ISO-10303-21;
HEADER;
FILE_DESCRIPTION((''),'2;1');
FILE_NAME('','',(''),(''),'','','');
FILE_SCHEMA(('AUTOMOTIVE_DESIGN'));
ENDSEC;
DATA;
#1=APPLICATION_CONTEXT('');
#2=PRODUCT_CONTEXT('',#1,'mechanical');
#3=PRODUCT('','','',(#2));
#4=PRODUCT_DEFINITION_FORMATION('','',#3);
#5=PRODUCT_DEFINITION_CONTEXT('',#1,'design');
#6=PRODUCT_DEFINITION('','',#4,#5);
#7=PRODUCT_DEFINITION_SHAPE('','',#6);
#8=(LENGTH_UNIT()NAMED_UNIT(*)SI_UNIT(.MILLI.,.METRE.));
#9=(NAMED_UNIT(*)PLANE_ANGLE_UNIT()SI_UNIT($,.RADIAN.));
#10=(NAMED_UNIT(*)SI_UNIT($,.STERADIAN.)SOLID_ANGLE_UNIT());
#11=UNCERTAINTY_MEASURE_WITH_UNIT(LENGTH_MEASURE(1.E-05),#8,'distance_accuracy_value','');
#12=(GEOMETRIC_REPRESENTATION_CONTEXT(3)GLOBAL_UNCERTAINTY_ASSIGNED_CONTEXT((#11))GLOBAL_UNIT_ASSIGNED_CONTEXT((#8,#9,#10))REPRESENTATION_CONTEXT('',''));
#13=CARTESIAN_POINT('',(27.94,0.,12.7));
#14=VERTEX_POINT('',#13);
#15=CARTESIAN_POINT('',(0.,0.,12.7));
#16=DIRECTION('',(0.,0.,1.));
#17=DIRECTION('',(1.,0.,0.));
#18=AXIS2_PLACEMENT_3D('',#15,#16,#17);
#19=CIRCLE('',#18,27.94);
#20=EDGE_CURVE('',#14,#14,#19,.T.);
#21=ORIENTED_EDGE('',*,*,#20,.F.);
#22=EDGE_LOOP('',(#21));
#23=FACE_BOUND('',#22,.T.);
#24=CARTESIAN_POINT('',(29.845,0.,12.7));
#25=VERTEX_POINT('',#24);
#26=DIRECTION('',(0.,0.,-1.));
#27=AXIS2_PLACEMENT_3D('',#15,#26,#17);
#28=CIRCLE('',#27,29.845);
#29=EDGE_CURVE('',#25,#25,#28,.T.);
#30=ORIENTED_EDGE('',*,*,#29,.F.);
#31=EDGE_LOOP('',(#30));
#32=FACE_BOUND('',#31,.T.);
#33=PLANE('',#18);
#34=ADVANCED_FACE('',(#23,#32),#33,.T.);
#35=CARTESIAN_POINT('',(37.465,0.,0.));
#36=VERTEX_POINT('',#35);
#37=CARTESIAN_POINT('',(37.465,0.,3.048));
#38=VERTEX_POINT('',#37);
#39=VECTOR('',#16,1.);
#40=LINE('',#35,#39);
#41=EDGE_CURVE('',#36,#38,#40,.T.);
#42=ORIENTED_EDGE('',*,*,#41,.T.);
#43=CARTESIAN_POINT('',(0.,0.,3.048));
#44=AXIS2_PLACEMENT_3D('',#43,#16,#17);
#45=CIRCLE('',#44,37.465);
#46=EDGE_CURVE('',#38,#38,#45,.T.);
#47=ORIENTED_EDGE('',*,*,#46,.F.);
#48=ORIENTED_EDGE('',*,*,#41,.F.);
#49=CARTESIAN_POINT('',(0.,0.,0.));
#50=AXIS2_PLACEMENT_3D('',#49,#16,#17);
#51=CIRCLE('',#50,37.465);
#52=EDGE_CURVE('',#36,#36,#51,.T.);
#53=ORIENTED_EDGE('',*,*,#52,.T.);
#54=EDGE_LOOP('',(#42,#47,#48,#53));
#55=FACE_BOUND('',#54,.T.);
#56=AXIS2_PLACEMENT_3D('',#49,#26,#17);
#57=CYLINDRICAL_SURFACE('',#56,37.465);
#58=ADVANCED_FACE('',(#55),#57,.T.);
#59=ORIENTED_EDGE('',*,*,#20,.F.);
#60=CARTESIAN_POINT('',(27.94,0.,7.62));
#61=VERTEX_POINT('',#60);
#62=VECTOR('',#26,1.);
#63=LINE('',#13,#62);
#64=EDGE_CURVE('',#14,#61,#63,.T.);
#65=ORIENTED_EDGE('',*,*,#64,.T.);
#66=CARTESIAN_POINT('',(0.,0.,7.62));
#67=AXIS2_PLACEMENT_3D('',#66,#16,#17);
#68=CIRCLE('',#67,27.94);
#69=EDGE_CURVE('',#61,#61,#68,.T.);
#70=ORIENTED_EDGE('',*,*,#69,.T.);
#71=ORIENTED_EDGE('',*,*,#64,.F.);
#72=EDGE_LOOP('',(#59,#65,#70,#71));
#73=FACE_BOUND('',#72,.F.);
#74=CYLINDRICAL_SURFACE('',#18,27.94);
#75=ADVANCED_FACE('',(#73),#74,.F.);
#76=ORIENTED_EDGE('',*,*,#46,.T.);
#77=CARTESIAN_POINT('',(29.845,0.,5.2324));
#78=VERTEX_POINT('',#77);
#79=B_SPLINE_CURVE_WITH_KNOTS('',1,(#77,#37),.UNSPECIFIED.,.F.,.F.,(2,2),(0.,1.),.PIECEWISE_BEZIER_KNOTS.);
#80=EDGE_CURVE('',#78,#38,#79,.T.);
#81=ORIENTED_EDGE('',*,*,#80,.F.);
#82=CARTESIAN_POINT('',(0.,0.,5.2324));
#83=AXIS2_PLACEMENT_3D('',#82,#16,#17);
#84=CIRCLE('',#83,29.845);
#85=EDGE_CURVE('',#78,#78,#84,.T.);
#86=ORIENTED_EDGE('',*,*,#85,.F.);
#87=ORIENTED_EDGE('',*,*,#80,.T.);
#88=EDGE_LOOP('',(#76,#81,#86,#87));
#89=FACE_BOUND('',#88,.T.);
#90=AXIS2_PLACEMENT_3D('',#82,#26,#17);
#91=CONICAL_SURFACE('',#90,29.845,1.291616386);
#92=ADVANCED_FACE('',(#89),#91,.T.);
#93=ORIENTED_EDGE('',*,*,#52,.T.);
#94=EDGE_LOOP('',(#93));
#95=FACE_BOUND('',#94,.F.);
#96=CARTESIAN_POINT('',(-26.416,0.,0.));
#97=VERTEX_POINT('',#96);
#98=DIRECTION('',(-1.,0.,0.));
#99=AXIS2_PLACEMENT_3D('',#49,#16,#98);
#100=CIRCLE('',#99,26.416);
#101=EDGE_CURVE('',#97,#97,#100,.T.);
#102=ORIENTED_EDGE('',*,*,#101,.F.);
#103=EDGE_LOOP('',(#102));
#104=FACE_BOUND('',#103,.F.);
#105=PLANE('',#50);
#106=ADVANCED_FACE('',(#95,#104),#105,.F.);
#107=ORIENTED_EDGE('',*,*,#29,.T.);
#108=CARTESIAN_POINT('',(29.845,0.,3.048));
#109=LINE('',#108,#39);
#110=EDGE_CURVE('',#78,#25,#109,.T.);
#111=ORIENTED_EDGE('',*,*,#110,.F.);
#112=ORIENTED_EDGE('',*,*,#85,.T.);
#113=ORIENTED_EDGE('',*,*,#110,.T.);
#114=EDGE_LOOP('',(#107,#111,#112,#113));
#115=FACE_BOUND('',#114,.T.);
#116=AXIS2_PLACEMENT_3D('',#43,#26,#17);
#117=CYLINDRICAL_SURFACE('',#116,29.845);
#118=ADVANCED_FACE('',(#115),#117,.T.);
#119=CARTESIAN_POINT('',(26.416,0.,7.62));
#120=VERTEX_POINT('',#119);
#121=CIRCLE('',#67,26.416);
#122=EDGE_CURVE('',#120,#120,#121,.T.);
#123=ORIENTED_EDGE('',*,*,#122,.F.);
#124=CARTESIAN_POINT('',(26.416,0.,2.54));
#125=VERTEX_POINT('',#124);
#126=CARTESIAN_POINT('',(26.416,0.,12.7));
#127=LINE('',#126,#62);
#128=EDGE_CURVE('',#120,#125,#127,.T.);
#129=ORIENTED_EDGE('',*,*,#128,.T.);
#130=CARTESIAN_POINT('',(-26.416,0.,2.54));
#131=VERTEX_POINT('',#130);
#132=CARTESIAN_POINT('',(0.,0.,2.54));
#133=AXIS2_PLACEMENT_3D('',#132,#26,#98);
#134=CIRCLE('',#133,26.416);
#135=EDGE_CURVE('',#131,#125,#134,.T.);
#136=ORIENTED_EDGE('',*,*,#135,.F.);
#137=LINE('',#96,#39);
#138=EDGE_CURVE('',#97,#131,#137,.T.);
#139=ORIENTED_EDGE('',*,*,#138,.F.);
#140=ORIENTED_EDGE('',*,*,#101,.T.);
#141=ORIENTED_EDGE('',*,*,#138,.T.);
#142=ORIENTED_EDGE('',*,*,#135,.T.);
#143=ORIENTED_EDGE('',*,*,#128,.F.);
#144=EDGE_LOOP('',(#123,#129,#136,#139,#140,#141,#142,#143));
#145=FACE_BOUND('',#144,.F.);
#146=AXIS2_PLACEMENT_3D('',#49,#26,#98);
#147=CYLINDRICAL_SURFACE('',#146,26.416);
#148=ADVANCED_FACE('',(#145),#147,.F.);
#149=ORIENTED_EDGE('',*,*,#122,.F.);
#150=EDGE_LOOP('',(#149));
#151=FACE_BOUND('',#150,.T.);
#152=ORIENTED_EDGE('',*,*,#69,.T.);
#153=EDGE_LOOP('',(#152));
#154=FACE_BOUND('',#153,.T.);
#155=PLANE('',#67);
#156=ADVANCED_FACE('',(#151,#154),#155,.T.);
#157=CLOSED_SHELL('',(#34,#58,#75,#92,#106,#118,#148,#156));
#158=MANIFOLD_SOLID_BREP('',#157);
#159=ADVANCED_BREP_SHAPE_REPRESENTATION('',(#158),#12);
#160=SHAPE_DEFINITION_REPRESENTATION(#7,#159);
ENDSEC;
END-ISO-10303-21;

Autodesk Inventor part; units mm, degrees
ref_plane "YZ Plane" through (0, 0, 0) normal (1, 0, 0) x (0, 1, 0)
ref_plane "XZ Plane" through (0, 0, 0) normal (0, 1, 0) x (-1, 0, 0)
sketch "Sketch1" plane through (0, 0, 0) normal (0, 0, 1) x (1, 0, 0)
  circle A0 centre (0, 0) radius 37.465
  dimension "d0" = 74.93
extrude "Extrusion1" add sketch "Sketch1" along normal blind 12.7
sketch "Sketch3" plane through (0, 0, 12.7) normal (0, 0, 1) x (1, 0, 0)
  circle A0 centre (0, 0) radius 26.289
  dimension "d6" = 52.578
extrude "Extrusion3" cut sketch "Sketch3" against normal blind 2.54
sketch "Sketch4" plane through (0, 0, 0) normal (0, 0, -1) x (-1, 0, 0)
  circle A0 centre (0, 0) radius 26.416
  dimension "d9" = 52.832
extrude "Extrusion4" cut sketch "Sketch4" against normal blind 2.54
ref_plane "Work Plane1" through (0, 0, 12.7) normal (0, 0, 1) x (1, 0, 0)
ref_plane "Work Plane3" through (0, 0, 5.2324) normal (0, 0, 1) x (1, 0, 0)
ref_plane "Work Plane5" through (0, 0, 3.048) normal (0, 0, 1) x (1, 0, 0)
sketch "Sketch9" plane through (0, 0, 5.2324) normal (0, 0, 1) x (1, 0, 0)
  circle A0 centre (0, 0) radius 29.845 projected
sketch "Sketch11" plane through (0, 0, 3.048) normal (0, 0, 1) x (1, 0, 0)
  circle A0 centre (0, 0) radius 29.845
  circle A1 centre (0, 0) radius 37.465
  dimension "d42" = 59.69
  dimension "d43" = 74.93
extrude "Extrusion7" cut sketch "Sketch11" along normal through all
loft "Loft5" add profiles "Sketch9" section 2 edges at (-37.465, 0, 3.048)
sketch "Sketch12" plane through (0, 0, 12.7) normal (0, 0, 1) x (1, 0, 0)
  circle A0 centre (0, 0) radius 27.94
  circle A1 centre (0, 0) radius 26.289
  dimension "d50" = 55.88
extrude "Extrusion8" cut sketch "Sketch12" against normal blind 5.08
sketch "Sketch2" plane through (0, 0, 12.7) normal (0, 0, 1) x (1, 0, 0)
  circle A0 centre (0, 0) radius 26.416
  dimension "d3" = 52.832
extrude "Extrusion2" cut sketch "Sketch2" against normal blind 50.8
properties part number "KF50tube_v3"
